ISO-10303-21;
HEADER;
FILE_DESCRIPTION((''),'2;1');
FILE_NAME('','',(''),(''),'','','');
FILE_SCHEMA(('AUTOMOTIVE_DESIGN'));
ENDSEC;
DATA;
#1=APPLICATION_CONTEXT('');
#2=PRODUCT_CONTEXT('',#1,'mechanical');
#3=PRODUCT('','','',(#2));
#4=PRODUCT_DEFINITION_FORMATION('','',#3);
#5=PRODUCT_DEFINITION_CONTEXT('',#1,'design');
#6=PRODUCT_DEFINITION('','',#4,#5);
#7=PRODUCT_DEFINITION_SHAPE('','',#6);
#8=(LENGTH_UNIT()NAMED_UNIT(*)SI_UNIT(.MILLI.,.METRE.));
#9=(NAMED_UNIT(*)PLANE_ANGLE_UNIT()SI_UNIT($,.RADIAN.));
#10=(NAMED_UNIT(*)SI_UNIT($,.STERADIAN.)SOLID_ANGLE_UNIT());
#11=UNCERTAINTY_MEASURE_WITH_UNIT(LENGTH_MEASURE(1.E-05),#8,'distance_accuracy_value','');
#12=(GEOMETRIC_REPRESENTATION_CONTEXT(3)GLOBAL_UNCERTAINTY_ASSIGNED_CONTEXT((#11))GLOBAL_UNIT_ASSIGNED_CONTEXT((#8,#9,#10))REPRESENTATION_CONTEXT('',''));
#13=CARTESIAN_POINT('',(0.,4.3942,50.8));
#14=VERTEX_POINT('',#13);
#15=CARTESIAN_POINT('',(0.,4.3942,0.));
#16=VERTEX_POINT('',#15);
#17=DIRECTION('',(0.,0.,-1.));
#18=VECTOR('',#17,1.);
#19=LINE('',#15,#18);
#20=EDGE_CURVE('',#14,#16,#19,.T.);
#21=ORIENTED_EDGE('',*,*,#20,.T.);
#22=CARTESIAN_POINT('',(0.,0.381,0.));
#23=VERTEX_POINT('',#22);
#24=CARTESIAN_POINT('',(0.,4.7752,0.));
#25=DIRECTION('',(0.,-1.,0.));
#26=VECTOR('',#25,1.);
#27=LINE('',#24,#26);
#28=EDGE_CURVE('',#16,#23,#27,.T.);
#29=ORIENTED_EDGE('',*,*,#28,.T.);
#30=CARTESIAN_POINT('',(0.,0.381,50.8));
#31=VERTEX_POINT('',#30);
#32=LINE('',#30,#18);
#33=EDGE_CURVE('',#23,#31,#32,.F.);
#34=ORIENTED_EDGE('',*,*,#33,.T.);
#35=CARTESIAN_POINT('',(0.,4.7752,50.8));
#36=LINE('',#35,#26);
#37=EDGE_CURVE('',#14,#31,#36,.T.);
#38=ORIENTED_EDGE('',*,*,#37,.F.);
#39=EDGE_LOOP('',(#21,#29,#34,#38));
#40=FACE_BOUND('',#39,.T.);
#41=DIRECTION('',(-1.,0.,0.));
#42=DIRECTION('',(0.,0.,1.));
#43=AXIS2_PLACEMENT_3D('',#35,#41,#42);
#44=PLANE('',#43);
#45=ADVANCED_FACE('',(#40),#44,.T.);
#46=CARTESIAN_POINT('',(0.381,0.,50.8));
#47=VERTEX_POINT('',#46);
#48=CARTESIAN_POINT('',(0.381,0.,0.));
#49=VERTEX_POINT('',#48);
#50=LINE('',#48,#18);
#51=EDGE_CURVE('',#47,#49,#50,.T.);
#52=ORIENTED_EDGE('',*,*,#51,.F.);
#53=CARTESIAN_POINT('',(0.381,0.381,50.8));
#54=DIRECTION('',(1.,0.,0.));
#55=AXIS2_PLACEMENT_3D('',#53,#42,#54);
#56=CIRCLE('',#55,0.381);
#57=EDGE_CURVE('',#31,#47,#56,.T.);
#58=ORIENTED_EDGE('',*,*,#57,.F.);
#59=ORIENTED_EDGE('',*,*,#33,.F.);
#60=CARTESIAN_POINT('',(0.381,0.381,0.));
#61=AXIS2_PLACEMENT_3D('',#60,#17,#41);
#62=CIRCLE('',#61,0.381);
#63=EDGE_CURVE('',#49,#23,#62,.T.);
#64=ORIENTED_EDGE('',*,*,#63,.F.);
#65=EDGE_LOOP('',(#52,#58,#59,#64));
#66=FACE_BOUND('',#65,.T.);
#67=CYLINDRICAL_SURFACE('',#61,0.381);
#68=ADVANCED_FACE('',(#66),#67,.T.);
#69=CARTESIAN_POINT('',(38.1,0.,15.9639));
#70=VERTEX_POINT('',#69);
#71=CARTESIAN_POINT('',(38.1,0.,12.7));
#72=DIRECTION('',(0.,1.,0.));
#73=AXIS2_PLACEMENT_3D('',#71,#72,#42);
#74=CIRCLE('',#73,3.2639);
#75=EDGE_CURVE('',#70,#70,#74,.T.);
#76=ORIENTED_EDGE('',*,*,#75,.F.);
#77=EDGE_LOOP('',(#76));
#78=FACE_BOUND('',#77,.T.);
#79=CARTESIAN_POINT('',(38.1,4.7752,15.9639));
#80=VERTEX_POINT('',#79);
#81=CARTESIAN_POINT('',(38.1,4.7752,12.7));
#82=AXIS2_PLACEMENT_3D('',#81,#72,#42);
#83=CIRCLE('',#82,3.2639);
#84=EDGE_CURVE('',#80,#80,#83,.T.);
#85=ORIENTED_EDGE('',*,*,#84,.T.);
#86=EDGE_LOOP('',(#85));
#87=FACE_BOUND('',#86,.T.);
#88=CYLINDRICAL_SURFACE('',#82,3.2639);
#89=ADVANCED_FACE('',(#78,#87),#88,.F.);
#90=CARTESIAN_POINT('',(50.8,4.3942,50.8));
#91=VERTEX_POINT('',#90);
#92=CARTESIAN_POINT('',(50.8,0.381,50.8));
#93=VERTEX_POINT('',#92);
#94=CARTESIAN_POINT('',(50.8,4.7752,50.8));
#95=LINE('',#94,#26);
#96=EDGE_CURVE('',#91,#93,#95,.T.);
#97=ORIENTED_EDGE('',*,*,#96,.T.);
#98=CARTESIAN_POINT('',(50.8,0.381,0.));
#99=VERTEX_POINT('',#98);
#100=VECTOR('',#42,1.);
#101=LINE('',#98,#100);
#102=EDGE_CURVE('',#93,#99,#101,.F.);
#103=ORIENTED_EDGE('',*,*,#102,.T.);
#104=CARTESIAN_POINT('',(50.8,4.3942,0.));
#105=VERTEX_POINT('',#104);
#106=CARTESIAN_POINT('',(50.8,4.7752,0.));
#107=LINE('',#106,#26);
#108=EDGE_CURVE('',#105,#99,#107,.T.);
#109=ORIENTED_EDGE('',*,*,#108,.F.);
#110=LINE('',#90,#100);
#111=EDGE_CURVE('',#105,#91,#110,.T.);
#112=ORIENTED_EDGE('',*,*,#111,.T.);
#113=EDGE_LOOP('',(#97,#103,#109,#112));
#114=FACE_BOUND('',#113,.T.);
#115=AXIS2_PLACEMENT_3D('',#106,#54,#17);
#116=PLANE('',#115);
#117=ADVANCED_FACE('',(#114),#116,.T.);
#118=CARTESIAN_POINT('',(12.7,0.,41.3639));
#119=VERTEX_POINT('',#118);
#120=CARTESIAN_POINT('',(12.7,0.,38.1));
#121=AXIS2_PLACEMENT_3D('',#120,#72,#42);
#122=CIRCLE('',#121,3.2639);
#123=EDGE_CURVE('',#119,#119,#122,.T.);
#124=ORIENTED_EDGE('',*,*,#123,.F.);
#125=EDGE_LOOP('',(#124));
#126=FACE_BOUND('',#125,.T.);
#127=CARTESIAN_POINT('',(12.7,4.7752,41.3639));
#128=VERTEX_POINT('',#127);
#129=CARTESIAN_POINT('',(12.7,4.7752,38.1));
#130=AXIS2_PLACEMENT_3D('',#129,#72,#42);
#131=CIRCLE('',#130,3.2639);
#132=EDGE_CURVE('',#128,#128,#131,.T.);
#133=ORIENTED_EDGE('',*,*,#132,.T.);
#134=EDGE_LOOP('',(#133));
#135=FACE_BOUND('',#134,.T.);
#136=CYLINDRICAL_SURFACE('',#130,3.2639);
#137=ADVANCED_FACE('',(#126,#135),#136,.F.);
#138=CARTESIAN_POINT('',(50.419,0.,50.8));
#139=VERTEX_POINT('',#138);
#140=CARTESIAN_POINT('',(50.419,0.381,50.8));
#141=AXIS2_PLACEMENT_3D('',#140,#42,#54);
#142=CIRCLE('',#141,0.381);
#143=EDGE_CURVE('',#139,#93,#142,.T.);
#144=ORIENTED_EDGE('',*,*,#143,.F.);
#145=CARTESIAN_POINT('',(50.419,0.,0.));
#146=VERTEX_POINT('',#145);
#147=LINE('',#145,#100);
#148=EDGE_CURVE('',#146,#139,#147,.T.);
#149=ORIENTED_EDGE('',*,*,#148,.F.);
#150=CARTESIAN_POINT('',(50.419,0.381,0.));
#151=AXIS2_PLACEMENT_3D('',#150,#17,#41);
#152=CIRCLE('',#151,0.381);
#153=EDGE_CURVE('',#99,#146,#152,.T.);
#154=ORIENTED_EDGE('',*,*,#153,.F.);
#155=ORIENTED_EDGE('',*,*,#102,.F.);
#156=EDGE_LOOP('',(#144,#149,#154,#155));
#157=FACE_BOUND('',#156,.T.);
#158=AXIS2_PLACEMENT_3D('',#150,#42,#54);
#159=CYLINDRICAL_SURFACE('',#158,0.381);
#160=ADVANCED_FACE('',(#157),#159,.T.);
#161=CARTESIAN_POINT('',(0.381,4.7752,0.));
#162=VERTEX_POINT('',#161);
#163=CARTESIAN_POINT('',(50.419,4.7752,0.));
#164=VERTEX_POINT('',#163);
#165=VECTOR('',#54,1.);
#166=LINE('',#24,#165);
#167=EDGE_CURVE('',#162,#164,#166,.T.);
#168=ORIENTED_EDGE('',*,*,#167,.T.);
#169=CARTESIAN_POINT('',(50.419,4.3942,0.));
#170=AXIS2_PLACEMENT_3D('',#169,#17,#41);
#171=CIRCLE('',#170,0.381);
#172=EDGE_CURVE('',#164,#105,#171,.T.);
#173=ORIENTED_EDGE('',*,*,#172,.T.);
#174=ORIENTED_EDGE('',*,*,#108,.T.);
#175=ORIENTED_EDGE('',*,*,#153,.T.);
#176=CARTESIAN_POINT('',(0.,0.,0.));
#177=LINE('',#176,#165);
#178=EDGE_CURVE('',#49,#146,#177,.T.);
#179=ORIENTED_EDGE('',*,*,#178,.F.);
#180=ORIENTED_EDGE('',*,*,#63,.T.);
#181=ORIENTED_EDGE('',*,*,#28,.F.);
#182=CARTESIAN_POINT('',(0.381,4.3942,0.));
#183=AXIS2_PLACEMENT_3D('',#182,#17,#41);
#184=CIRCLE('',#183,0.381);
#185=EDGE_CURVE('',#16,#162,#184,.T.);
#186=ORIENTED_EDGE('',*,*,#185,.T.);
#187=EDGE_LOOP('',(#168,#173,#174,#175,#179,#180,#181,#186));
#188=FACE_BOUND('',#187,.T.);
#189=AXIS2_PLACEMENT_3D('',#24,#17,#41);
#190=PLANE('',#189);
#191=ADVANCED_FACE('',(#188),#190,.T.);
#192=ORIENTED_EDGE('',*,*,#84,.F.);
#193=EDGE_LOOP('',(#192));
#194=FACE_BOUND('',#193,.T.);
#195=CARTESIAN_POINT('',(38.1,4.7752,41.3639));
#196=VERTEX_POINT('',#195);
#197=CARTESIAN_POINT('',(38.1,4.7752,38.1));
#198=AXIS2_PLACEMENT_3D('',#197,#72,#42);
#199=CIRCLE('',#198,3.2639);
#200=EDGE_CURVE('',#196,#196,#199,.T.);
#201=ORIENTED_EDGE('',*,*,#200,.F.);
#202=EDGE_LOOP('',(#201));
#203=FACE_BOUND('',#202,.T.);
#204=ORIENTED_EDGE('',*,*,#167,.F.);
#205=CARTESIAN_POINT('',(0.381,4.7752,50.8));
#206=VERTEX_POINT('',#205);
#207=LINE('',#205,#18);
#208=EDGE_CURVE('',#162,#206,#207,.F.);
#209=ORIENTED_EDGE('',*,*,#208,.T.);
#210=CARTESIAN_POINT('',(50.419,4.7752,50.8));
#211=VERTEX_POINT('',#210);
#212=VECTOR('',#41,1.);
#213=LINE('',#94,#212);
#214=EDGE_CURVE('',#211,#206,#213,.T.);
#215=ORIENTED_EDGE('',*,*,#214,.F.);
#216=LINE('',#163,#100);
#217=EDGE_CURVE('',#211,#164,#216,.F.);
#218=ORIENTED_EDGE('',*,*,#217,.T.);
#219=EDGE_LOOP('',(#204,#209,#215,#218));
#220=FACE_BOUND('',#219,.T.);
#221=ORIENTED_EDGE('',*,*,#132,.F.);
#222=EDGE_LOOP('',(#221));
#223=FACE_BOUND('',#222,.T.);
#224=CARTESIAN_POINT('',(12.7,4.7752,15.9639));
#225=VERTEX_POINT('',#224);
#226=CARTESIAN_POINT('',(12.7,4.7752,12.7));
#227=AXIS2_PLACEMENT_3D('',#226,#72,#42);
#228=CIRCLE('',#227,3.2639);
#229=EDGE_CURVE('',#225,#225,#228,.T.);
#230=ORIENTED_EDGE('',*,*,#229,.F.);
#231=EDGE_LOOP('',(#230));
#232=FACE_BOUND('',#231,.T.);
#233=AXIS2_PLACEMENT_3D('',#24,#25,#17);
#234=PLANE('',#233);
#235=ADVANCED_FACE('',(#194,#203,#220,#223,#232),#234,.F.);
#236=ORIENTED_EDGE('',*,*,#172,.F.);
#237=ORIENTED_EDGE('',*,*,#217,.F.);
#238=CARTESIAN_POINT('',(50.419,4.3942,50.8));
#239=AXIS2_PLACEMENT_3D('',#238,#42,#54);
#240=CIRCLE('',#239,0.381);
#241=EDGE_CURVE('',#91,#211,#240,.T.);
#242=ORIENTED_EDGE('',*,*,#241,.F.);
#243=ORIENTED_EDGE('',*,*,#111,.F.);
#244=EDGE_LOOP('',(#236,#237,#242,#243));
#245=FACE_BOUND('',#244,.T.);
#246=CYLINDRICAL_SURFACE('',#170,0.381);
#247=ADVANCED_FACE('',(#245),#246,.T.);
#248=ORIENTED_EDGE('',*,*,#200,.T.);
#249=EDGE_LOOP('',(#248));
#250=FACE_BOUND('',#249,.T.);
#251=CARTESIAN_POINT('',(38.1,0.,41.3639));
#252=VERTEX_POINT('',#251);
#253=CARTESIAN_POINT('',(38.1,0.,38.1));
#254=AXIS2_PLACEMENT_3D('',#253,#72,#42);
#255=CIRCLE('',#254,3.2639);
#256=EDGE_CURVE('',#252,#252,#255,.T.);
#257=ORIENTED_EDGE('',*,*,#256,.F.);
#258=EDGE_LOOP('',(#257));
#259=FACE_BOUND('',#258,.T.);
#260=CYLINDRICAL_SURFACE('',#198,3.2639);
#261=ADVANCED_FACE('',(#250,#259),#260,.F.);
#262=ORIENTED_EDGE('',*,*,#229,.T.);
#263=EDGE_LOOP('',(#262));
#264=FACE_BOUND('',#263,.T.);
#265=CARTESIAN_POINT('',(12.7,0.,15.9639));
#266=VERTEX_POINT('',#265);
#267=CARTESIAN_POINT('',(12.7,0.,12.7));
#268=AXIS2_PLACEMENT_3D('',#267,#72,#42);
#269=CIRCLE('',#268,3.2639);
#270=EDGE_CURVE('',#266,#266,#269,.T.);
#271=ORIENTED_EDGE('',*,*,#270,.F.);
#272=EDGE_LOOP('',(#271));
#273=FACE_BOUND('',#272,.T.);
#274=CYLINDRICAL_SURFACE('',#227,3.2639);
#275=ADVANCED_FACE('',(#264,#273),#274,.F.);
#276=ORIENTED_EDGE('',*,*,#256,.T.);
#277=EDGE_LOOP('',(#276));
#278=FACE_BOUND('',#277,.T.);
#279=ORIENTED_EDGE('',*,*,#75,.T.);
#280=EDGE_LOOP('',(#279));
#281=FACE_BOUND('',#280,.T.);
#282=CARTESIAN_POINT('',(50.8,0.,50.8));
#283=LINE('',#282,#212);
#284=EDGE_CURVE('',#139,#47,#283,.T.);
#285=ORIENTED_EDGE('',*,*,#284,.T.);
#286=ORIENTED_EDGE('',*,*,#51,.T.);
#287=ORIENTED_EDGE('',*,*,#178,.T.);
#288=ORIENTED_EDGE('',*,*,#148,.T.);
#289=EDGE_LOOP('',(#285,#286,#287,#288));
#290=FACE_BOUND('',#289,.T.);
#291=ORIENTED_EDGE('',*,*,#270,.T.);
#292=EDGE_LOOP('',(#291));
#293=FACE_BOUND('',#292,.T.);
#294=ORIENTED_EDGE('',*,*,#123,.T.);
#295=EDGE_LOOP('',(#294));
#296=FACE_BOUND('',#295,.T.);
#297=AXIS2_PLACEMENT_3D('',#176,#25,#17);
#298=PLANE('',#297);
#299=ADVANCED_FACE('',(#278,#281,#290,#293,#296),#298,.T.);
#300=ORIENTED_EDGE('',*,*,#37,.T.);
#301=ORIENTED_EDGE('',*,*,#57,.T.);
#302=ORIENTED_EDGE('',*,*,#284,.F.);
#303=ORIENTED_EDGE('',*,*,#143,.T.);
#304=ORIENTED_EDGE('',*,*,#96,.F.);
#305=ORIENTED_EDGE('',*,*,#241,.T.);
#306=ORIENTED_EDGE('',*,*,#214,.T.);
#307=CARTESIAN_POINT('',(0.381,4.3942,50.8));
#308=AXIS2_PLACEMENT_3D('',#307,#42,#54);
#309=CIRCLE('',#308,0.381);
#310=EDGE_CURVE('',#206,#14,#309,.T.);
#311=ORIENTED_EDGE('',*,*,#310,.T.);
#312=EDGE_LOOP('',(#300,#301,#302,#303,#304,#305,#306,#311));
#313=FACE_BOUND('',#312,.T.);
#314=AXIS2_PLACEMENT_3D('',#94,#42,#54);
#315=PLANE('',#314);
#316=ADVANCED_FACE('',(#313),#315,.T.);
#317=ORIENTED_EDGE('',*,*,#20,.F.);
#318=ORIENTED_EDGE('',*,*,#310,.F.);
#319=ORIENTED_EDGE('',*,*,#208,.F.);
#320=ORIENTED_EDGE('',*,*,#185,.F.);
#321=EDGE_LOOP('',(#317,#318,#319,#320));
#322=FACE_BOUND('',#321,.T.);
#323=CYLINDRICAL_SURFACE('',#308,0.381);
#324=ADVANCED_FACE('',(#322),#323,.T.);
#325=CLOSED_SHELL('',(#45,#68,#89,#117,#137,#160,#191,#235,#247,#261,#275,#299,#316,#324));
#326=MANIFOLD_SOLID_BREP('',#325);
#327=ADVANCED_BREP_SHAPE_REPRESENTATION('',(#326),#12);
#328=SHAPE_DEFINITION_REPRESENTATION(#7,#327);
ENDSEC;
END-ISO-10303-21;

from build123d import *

# Parameters (mm, degrees)
BOSS_EXTRUDE1_OUTLINE_W  = 4.7752
BOSS_EXTRUDE1_OUTLINE_H  = 50.8
BOSS_EXTRUDE1_DEPTH      = 50.8
F_0_257_DIAMETER_HOLE1_D = 6.5278
FILLET1_R                = 0.381
LPATTERN1_COUNT          = 2
LPATTERN1_PITCH          = 25.4
LPATTERN1_COUNT_DIR2     = 2
LPATTERN1_PITCH_DIR2     = 25.4


# Read off the part's stored shape, not the designer's step: Boss-Extrude1
with BuildPart() as part:
    # Boss-Extrude1 outline → Boss-Extrude1 (new body)
    with BuildSketch(Plane.YZ):
        with Locations((2.3876, 25.4)):
            Rectangle(BOSS_EXTRUDE1_OUTLINE_W, BOSS_EXTRUDE1_OUTLINE_H)
    extrude(amount=BOSS_EXTRUDE1_DEPTH)

    # F (0.257) Diameter Hole1 (through all)
    with Locations(Plane(origin=(0, 4.7752, 0), x_dir=(1, 0, 0), z_dir=(0, 1, 0))):
        with Locations((38.1, -38.1)):
            f_0_257_diameter_hole1 = Hole(F_0_257_DIAMETER_HOLE1_D / 2)

    # Fillet1
    fillet1_edges = [part.edges().sort_by_distance(p)[0] for p in [
        (50.8, 4.7752, 25.4),
        (0, 4.7752, 25.4),
        (50.8, 0, 25.4),
        (0, 0, 25.4),
    ]]
    fillet(fillet1_edges, radius=FILLET1_R)

    # LPattern1: F _0.257_ Diameter Hole1 2 × 2
    with Locations(*[(-i * LPATTERN1_PITCH, 0, -j * LPATTERN1_PITCH_DIR2) for i in range(LPATTERN1_COUNT) for j in range(LPATTERN1_COUNT_DIR2) if (i, j) != (0, 0)]):
        add(f_0_257_diameter_hole1, mode=Mode.SUBTRACT)


solid = part.part
